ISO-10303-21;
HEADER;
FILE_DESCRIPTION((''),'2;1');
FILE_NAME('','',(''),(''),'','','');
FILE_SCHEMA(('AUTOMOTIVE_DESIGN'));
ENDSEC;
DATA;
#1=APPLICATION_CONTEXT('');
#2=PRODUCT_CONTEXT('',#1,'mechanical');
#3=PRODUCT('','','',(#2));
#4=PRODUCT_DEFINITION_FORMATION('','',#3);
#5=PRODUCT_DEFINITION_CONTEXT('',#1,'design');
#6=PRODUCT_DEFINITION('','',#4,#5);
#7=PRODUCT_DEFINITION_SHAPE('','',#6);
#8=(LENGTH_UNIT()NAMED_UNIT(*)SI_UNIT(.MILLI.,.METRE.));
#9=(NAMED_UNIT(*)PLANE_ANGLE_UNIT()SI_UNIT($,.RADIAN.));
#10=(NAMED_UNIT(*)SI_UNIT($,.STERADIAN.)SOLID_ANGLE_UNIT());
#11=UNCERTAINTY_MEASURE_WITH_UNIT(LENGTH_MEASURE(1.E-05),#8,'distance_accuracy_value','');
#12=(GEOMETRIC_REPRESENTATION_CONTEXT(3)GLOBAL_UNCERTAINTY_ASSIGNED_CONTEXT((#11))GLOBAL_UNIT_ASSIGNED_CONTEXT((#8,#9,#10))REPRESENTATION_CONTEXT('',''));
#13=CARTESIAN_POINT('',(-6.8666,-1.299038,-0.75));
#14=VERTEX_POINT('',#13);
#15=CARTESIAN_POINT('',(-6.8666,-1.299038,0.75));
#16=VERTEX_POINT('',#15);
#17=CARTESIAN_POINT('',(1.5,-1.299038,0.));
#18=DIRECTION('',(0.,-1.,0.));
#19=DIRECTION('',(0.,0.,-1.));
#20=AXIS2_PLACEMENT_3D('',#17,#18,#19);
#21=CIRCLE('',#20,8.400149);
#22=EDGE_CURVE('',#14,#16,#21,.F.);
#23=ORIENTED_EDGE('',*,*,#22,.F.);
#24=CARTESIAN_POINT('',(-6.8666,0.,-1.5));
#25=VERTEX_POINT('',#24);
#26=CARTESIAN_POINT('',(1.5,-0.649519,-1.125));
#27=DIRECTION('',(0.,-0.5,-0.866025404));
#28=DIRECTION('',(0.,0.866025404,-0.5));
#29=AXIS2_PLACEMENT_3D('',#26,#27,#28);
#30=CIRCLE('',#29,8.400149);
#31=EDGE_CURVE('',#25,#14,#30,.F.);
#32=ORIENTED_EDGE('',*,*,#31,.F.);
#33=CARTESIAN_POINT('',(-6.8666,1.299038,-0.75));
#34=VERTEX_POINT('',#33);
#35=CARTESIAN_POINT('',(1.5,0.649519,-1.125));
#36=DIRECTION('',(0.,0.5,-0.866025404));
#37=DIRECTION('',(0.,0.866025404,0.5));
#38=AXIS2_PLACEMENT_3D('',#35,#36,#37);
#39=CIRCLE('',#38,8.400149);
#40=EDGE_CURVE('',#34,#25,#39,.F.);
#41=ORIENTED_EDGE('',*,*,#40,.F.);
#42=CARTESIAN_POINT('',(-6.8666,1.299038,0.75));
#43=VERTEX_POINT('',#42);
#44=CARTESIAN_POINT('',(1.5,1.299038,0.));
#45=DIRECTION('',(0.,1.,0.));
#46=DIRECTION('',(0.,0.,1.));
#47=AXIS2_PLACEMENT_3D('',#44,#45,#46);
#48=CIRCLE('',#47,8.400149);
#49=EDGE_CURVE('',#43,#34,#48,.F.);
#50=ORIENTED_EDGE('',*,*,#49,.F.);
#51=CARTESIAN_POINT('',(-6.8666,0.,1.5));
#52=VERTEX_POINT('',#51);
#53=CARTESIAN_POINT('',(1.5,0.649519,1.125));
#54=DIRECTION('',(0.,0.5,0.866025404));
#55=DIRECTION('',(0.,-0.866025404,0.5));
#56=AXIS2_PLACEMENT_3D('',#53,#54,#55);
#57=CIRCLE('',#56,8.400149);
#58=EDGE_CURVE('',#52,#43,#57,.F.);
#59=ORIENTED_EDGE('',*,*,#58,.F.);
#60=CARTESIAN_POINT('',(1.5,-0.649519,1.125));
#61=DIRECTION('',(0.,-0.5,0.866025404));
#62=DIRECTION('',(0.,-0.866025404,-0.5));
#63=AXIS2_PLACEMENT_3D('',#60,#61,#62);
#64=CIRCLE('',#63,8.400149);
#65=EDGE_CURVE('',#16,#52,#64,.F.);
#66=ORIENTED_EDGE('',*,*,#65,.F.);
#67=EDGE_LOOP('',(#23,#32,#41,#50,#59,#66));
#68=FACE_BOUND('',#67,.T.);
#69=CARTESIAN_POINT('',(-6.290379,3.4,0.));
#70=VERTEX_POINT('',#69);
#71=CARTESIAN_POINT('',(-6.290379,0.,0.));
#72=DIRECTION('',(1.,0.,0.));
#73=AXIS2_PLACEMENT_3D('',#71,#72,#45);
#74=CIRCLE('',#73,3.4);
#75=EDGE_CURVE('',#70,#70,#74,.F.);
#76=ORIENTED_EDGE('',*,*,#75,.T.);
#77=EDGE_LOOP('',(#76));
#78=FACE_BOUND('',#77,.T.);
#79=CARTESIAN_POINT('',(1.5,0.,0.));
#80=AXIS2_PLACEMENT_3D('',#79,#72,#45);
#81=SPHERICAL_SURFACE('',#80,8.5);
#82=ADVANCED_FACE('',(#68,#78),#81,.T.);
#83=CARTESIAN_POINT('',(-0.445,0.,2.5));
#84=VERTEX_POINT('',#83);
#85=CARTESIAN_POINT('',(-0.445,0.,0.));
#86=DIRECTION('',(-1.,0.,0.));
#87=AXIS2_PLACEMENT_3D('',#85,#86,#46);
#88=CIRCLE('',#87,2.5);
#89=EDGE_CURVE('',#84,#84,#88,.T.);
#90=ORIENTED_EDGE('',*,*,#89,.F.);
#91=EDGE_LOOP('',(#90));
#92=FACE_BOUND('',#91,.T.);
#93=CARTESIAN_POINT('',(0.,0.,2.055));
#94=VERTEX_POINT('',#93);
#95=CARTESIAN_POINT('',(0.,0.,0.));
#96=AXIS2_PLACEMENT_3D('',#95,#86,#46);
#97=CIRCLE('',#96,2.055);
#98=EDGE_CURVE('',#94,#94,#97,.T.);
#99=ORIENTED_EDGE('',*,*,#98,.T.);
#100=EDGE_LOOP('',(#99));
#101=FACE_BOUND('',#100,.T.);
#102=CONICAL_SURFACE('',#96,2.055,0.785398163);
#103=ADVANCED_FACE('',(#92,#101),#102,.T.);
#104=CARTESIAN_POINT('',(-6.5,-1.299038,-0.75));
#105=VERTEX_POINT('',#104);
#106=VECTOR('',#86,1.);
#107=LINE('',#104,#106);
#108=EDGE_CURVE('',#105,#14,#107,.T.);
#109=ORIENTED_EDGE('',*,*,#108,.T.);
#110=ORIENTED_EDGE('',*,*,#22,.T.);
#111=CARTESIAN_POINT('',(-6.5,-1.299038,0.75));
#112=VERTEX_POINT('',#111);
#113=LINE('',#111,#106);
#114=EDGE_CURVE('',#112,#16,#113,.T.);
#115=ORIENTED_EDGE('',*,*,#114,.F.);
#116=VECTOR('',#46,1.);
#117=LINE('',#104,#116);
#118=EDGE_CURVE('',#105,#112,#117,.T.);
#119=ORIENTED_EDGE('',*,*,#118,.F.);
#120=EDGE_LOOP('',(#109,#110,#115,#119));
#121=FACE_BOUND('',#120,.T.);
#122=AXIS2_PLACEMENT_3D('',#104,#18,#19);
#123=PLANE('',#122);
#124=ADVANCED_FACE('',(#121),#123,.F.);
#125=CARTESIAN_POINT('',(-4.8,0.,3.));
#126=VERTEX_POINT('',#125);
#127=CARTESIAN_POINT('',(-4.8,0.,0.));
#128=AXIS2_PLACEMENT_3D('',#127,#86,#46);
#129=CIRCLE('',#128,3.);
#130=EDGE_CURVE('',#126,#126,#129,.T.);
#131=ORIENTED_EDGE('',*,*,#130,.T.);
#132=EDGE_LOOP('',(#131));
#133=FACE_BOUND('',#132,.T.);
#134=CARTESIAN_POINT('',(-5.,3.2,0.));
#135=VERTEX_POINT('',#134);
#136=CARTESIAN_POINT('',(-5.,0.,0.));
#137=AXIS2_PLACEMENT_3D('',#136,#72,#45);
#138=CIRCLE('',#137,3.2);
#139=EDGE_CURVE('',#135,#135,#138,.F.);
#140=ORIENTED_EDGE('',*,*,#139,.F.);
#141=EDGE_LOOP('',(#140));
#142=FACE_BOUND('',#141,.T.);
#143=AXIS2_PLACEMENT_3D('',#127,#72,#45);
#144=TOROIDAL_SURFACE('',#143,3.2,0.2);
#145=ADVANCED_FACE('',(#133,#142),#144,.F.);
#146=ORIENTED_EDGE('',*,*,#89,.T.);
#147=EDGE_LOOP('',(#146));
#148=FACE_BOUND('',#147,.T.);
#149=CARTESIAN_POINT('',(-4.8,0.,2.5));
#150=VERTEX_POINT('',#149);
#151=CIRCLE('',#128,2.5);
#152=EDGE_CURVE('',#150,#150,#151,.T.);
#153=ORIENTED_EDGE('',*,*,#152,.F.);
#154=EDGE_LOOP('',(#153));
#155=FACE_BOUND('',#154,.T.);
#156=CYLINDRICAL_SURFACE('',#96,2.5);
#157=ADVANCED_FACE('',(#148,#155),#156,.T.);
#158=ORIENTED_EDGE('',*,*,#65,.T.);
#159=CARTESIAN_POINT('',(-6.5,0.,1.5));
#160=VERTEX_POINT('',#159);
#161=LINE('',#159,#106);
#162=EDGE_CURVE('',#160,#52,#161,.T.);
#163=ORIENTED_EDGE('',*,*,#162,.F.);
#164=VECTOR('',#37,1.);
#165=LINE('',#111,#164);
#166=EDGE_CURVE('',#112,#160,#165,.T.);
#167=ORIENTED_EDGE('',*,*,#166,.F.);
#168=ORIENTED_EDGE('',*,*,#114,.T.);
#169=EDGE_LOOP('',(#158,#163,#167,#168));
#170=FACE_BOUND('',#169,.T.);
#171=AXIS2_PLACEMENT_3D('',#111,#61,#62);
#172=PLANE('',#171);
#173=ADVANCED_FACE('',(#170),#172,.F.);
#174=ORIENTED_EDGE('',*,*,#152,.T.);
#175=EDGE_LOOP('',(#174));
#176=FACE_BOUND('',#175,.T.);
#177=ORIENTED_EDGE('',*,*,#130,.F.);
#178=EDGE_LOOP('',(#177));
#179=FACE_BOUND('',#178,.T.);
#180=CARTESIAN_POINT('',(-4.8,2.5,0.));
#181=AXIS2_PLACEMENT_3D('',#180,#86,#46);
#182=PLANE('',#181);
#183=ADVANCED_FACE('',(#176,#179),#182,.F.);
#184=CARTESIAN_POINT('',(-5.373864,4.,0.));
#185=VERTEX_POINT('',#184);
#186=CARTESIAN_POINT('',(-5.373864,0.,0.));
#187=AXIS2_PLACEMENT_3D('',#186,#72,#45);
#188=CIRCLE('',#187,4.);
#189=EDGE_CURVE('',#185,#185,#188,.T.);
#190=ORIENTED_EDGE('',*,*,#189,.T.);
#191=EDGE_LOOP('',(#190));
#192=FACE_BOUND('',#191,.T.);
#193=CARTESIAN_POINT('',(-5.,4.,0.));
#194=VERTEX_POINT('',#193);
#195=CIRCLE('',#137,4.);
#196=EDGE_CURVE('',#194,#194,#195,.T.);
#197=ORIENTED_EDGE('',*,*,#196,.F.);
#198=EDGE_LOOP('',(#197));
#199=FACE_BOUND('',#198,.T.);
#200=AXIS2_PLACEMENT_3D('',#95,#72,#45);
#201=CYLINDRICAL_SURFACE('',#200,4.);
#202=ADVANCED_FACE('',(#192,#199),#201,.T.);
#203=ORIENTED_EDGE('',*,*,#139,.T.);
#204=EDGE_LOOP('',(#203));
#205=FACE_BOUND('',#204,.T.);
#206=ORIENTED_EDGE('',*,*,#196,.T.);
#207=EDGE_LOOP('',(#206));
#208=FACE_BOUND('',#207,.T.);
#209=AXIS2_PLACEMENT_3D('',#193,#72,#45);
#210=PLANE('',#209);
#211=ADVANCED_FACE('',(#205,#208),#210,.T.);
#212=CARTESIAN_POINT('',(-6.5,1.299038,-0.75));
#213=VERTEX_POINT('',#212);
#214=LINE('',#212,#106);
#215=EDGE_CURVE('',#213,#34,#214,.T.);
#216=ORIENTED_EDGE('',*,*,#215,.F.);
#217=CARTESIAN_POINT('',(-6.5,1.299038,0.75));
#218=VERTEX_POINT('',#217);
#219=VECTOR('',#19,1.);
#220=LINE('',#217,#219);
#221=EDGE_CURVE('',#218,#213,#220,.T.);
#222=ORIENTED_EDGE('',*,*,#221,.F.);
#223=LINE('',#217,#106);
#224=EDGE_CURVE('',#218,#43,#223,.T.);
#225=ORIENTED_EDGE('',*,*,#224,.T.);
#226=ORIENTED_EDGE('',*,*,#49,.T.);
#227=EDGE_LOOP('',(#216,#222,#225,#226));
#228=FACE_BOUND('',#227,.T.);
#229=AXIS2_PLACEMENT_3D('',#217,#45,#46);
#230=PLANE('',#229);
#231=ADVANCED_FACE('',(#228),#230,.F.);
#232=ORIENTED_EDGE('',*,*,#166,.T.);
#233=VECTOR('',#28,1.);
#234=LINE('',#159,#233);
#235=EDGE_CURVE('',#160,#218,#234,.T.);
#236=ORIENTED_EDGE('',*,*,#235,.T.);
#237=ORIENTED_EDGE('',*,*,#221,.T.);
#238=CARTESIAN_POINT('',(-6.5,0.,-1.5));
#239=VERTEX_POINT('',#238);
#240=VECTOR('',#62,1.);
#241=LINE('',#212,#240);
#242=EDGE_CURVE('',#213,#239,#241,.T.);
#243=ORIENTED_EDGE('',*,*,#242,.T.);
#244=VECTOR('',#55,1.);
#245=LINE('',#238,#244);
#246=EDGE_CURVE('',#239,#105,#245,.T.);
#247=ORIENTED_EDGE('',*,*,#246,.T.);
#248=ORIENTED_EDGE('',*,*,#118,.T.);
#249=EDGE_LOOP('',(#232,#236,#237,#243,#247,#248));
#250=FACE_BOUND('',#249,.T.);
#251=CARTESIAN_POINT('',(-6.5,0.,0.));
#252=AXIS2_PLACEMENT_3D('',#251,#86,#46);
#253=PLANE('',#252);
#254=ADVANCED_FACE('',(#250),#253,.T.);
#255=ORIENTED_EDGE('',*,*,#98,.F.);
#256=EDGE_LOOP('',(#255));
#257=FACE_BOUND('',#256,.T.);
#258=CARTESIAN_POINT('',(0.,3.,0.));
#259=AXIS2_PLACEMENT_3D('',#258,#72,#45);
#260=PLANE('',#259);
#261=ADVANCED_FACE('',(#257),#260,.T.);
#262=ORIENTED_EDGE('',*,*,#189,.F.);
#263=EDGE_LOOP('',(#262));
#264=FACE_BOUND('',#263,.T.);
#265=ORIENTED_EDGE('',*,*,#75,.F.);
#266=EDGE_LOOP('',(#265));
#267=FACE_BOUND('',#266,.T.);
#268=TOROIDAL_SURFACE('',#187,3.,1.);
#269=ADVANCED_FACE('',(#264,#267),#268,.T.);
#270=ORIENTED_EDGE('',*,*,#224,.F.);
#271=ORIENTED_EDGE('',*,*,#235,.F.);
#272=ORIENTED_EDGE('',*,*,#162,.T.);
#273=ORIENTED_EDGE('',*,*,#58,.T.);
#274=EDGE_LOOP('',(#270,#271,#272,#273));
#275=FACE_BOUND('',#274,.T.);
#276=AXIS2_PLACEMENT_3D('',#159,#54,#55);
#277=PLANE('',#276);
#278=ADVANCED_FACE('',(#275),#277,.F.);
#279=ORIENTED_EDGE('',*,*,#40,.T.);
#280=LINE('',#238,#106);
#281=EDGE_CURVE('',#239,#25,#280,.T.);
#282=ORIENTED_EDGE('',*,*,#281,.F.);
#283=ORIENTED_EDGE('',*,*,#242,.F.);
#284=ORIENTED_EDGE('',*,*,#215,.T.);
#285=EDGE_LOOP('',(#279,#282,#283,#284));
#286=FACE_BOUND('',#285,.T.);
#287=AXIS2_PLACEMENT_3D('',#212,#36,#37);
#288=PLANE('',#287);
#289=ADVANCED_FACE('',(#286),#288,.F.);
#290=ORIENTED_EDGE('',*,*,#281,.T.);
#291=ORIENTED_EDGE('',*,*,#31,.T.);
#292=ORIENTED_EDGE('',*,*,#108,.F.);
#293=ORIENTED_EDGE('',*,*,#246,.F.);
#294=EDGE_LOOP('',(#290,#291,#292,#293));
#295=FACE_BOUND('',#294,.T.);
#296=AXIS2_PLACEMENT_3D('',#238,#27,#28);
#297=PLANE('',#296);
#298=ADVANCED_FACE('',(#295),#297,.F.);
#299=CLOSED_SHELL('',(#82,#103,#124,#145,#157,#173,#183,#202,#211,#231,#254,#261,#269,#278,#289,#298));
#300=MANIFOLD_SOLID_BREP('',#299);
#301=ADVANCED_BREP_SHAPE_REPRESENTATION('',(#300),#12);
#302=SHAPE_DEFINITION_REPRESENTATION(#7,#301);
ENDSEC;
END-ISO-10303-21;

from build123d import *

# Parameters (mm, degrees)
ENL_V_MAT_EXTRU_1_DEPTH = 0.5
CONG_1_R                = 0.2
CONG_2_R                = 1


# Read off the part's stored shape, not the designer's step: M5 Filetages mécaniques Borne1
with BuildPart() as part:
    # Esquisse1 → Révolution1 (revolve)
    with BuildSketch(Plane.XY):
        with BuildLine():
            Line((0, 0), (-7, 0))
            ThreePointArc((-7, 0), (-6.746211251, 2.061552813), (-6, 4))
            Line((-6, 4), (-5, 4))
            Line((-5, 4), (-5, 3))
            Line((-5, 3), (0, 3))
            Line((0, 3), (0, 0))
        make_face()
    revolve(axis=Axis((0, 0, 0), (-1, 0, 0)))

    # Esquisse2 → Enlèv. mat.-Extru.1 (cut)
    with BuildSketch(Plane.ZY.offset(7)):
        Polygon((0.75, 1.299038106), (-0.75, 1.299038106), (-1.5, 0), (-0.75, -1.299038106), (0.75, -1.299038106), (1.5, 0), align=None)
    extrude(amount=-ENL_V_MAT_EXTRU_1_DEPTH, mode=Mode.SUBTRACT)

    # Congé1
    cong_1_edges = [part.edges().sort_by_distance(p)[0] for p in [
        (-5, -3, 0),
    ]]
    fillet(cong_1_edges, radius=CONG_1_R)

    # Congé2
    cong_2_edges = [part.edges().sort_by_distance(p)[0] for p in [
        (-6, -4, 0),
    ]]
    fillet(cong_2_edges, radius=CONG_2_R)

    # M5 Filetages mécaniques Borne1 outline → M5 Filetages mécaniques Borne1 (revolve, cut)
    with BuildSketch(Plane.YX):
        Polygon((3, 0), (2.055, 0), (2.5, -0.445), (2.5, -4.8), (3, -4.8), align=None)
    revolve(axis=Axis((0, 0, 0), (1, 0, 0)), mode=Mode.SUBTRACT)


solid = part.part
